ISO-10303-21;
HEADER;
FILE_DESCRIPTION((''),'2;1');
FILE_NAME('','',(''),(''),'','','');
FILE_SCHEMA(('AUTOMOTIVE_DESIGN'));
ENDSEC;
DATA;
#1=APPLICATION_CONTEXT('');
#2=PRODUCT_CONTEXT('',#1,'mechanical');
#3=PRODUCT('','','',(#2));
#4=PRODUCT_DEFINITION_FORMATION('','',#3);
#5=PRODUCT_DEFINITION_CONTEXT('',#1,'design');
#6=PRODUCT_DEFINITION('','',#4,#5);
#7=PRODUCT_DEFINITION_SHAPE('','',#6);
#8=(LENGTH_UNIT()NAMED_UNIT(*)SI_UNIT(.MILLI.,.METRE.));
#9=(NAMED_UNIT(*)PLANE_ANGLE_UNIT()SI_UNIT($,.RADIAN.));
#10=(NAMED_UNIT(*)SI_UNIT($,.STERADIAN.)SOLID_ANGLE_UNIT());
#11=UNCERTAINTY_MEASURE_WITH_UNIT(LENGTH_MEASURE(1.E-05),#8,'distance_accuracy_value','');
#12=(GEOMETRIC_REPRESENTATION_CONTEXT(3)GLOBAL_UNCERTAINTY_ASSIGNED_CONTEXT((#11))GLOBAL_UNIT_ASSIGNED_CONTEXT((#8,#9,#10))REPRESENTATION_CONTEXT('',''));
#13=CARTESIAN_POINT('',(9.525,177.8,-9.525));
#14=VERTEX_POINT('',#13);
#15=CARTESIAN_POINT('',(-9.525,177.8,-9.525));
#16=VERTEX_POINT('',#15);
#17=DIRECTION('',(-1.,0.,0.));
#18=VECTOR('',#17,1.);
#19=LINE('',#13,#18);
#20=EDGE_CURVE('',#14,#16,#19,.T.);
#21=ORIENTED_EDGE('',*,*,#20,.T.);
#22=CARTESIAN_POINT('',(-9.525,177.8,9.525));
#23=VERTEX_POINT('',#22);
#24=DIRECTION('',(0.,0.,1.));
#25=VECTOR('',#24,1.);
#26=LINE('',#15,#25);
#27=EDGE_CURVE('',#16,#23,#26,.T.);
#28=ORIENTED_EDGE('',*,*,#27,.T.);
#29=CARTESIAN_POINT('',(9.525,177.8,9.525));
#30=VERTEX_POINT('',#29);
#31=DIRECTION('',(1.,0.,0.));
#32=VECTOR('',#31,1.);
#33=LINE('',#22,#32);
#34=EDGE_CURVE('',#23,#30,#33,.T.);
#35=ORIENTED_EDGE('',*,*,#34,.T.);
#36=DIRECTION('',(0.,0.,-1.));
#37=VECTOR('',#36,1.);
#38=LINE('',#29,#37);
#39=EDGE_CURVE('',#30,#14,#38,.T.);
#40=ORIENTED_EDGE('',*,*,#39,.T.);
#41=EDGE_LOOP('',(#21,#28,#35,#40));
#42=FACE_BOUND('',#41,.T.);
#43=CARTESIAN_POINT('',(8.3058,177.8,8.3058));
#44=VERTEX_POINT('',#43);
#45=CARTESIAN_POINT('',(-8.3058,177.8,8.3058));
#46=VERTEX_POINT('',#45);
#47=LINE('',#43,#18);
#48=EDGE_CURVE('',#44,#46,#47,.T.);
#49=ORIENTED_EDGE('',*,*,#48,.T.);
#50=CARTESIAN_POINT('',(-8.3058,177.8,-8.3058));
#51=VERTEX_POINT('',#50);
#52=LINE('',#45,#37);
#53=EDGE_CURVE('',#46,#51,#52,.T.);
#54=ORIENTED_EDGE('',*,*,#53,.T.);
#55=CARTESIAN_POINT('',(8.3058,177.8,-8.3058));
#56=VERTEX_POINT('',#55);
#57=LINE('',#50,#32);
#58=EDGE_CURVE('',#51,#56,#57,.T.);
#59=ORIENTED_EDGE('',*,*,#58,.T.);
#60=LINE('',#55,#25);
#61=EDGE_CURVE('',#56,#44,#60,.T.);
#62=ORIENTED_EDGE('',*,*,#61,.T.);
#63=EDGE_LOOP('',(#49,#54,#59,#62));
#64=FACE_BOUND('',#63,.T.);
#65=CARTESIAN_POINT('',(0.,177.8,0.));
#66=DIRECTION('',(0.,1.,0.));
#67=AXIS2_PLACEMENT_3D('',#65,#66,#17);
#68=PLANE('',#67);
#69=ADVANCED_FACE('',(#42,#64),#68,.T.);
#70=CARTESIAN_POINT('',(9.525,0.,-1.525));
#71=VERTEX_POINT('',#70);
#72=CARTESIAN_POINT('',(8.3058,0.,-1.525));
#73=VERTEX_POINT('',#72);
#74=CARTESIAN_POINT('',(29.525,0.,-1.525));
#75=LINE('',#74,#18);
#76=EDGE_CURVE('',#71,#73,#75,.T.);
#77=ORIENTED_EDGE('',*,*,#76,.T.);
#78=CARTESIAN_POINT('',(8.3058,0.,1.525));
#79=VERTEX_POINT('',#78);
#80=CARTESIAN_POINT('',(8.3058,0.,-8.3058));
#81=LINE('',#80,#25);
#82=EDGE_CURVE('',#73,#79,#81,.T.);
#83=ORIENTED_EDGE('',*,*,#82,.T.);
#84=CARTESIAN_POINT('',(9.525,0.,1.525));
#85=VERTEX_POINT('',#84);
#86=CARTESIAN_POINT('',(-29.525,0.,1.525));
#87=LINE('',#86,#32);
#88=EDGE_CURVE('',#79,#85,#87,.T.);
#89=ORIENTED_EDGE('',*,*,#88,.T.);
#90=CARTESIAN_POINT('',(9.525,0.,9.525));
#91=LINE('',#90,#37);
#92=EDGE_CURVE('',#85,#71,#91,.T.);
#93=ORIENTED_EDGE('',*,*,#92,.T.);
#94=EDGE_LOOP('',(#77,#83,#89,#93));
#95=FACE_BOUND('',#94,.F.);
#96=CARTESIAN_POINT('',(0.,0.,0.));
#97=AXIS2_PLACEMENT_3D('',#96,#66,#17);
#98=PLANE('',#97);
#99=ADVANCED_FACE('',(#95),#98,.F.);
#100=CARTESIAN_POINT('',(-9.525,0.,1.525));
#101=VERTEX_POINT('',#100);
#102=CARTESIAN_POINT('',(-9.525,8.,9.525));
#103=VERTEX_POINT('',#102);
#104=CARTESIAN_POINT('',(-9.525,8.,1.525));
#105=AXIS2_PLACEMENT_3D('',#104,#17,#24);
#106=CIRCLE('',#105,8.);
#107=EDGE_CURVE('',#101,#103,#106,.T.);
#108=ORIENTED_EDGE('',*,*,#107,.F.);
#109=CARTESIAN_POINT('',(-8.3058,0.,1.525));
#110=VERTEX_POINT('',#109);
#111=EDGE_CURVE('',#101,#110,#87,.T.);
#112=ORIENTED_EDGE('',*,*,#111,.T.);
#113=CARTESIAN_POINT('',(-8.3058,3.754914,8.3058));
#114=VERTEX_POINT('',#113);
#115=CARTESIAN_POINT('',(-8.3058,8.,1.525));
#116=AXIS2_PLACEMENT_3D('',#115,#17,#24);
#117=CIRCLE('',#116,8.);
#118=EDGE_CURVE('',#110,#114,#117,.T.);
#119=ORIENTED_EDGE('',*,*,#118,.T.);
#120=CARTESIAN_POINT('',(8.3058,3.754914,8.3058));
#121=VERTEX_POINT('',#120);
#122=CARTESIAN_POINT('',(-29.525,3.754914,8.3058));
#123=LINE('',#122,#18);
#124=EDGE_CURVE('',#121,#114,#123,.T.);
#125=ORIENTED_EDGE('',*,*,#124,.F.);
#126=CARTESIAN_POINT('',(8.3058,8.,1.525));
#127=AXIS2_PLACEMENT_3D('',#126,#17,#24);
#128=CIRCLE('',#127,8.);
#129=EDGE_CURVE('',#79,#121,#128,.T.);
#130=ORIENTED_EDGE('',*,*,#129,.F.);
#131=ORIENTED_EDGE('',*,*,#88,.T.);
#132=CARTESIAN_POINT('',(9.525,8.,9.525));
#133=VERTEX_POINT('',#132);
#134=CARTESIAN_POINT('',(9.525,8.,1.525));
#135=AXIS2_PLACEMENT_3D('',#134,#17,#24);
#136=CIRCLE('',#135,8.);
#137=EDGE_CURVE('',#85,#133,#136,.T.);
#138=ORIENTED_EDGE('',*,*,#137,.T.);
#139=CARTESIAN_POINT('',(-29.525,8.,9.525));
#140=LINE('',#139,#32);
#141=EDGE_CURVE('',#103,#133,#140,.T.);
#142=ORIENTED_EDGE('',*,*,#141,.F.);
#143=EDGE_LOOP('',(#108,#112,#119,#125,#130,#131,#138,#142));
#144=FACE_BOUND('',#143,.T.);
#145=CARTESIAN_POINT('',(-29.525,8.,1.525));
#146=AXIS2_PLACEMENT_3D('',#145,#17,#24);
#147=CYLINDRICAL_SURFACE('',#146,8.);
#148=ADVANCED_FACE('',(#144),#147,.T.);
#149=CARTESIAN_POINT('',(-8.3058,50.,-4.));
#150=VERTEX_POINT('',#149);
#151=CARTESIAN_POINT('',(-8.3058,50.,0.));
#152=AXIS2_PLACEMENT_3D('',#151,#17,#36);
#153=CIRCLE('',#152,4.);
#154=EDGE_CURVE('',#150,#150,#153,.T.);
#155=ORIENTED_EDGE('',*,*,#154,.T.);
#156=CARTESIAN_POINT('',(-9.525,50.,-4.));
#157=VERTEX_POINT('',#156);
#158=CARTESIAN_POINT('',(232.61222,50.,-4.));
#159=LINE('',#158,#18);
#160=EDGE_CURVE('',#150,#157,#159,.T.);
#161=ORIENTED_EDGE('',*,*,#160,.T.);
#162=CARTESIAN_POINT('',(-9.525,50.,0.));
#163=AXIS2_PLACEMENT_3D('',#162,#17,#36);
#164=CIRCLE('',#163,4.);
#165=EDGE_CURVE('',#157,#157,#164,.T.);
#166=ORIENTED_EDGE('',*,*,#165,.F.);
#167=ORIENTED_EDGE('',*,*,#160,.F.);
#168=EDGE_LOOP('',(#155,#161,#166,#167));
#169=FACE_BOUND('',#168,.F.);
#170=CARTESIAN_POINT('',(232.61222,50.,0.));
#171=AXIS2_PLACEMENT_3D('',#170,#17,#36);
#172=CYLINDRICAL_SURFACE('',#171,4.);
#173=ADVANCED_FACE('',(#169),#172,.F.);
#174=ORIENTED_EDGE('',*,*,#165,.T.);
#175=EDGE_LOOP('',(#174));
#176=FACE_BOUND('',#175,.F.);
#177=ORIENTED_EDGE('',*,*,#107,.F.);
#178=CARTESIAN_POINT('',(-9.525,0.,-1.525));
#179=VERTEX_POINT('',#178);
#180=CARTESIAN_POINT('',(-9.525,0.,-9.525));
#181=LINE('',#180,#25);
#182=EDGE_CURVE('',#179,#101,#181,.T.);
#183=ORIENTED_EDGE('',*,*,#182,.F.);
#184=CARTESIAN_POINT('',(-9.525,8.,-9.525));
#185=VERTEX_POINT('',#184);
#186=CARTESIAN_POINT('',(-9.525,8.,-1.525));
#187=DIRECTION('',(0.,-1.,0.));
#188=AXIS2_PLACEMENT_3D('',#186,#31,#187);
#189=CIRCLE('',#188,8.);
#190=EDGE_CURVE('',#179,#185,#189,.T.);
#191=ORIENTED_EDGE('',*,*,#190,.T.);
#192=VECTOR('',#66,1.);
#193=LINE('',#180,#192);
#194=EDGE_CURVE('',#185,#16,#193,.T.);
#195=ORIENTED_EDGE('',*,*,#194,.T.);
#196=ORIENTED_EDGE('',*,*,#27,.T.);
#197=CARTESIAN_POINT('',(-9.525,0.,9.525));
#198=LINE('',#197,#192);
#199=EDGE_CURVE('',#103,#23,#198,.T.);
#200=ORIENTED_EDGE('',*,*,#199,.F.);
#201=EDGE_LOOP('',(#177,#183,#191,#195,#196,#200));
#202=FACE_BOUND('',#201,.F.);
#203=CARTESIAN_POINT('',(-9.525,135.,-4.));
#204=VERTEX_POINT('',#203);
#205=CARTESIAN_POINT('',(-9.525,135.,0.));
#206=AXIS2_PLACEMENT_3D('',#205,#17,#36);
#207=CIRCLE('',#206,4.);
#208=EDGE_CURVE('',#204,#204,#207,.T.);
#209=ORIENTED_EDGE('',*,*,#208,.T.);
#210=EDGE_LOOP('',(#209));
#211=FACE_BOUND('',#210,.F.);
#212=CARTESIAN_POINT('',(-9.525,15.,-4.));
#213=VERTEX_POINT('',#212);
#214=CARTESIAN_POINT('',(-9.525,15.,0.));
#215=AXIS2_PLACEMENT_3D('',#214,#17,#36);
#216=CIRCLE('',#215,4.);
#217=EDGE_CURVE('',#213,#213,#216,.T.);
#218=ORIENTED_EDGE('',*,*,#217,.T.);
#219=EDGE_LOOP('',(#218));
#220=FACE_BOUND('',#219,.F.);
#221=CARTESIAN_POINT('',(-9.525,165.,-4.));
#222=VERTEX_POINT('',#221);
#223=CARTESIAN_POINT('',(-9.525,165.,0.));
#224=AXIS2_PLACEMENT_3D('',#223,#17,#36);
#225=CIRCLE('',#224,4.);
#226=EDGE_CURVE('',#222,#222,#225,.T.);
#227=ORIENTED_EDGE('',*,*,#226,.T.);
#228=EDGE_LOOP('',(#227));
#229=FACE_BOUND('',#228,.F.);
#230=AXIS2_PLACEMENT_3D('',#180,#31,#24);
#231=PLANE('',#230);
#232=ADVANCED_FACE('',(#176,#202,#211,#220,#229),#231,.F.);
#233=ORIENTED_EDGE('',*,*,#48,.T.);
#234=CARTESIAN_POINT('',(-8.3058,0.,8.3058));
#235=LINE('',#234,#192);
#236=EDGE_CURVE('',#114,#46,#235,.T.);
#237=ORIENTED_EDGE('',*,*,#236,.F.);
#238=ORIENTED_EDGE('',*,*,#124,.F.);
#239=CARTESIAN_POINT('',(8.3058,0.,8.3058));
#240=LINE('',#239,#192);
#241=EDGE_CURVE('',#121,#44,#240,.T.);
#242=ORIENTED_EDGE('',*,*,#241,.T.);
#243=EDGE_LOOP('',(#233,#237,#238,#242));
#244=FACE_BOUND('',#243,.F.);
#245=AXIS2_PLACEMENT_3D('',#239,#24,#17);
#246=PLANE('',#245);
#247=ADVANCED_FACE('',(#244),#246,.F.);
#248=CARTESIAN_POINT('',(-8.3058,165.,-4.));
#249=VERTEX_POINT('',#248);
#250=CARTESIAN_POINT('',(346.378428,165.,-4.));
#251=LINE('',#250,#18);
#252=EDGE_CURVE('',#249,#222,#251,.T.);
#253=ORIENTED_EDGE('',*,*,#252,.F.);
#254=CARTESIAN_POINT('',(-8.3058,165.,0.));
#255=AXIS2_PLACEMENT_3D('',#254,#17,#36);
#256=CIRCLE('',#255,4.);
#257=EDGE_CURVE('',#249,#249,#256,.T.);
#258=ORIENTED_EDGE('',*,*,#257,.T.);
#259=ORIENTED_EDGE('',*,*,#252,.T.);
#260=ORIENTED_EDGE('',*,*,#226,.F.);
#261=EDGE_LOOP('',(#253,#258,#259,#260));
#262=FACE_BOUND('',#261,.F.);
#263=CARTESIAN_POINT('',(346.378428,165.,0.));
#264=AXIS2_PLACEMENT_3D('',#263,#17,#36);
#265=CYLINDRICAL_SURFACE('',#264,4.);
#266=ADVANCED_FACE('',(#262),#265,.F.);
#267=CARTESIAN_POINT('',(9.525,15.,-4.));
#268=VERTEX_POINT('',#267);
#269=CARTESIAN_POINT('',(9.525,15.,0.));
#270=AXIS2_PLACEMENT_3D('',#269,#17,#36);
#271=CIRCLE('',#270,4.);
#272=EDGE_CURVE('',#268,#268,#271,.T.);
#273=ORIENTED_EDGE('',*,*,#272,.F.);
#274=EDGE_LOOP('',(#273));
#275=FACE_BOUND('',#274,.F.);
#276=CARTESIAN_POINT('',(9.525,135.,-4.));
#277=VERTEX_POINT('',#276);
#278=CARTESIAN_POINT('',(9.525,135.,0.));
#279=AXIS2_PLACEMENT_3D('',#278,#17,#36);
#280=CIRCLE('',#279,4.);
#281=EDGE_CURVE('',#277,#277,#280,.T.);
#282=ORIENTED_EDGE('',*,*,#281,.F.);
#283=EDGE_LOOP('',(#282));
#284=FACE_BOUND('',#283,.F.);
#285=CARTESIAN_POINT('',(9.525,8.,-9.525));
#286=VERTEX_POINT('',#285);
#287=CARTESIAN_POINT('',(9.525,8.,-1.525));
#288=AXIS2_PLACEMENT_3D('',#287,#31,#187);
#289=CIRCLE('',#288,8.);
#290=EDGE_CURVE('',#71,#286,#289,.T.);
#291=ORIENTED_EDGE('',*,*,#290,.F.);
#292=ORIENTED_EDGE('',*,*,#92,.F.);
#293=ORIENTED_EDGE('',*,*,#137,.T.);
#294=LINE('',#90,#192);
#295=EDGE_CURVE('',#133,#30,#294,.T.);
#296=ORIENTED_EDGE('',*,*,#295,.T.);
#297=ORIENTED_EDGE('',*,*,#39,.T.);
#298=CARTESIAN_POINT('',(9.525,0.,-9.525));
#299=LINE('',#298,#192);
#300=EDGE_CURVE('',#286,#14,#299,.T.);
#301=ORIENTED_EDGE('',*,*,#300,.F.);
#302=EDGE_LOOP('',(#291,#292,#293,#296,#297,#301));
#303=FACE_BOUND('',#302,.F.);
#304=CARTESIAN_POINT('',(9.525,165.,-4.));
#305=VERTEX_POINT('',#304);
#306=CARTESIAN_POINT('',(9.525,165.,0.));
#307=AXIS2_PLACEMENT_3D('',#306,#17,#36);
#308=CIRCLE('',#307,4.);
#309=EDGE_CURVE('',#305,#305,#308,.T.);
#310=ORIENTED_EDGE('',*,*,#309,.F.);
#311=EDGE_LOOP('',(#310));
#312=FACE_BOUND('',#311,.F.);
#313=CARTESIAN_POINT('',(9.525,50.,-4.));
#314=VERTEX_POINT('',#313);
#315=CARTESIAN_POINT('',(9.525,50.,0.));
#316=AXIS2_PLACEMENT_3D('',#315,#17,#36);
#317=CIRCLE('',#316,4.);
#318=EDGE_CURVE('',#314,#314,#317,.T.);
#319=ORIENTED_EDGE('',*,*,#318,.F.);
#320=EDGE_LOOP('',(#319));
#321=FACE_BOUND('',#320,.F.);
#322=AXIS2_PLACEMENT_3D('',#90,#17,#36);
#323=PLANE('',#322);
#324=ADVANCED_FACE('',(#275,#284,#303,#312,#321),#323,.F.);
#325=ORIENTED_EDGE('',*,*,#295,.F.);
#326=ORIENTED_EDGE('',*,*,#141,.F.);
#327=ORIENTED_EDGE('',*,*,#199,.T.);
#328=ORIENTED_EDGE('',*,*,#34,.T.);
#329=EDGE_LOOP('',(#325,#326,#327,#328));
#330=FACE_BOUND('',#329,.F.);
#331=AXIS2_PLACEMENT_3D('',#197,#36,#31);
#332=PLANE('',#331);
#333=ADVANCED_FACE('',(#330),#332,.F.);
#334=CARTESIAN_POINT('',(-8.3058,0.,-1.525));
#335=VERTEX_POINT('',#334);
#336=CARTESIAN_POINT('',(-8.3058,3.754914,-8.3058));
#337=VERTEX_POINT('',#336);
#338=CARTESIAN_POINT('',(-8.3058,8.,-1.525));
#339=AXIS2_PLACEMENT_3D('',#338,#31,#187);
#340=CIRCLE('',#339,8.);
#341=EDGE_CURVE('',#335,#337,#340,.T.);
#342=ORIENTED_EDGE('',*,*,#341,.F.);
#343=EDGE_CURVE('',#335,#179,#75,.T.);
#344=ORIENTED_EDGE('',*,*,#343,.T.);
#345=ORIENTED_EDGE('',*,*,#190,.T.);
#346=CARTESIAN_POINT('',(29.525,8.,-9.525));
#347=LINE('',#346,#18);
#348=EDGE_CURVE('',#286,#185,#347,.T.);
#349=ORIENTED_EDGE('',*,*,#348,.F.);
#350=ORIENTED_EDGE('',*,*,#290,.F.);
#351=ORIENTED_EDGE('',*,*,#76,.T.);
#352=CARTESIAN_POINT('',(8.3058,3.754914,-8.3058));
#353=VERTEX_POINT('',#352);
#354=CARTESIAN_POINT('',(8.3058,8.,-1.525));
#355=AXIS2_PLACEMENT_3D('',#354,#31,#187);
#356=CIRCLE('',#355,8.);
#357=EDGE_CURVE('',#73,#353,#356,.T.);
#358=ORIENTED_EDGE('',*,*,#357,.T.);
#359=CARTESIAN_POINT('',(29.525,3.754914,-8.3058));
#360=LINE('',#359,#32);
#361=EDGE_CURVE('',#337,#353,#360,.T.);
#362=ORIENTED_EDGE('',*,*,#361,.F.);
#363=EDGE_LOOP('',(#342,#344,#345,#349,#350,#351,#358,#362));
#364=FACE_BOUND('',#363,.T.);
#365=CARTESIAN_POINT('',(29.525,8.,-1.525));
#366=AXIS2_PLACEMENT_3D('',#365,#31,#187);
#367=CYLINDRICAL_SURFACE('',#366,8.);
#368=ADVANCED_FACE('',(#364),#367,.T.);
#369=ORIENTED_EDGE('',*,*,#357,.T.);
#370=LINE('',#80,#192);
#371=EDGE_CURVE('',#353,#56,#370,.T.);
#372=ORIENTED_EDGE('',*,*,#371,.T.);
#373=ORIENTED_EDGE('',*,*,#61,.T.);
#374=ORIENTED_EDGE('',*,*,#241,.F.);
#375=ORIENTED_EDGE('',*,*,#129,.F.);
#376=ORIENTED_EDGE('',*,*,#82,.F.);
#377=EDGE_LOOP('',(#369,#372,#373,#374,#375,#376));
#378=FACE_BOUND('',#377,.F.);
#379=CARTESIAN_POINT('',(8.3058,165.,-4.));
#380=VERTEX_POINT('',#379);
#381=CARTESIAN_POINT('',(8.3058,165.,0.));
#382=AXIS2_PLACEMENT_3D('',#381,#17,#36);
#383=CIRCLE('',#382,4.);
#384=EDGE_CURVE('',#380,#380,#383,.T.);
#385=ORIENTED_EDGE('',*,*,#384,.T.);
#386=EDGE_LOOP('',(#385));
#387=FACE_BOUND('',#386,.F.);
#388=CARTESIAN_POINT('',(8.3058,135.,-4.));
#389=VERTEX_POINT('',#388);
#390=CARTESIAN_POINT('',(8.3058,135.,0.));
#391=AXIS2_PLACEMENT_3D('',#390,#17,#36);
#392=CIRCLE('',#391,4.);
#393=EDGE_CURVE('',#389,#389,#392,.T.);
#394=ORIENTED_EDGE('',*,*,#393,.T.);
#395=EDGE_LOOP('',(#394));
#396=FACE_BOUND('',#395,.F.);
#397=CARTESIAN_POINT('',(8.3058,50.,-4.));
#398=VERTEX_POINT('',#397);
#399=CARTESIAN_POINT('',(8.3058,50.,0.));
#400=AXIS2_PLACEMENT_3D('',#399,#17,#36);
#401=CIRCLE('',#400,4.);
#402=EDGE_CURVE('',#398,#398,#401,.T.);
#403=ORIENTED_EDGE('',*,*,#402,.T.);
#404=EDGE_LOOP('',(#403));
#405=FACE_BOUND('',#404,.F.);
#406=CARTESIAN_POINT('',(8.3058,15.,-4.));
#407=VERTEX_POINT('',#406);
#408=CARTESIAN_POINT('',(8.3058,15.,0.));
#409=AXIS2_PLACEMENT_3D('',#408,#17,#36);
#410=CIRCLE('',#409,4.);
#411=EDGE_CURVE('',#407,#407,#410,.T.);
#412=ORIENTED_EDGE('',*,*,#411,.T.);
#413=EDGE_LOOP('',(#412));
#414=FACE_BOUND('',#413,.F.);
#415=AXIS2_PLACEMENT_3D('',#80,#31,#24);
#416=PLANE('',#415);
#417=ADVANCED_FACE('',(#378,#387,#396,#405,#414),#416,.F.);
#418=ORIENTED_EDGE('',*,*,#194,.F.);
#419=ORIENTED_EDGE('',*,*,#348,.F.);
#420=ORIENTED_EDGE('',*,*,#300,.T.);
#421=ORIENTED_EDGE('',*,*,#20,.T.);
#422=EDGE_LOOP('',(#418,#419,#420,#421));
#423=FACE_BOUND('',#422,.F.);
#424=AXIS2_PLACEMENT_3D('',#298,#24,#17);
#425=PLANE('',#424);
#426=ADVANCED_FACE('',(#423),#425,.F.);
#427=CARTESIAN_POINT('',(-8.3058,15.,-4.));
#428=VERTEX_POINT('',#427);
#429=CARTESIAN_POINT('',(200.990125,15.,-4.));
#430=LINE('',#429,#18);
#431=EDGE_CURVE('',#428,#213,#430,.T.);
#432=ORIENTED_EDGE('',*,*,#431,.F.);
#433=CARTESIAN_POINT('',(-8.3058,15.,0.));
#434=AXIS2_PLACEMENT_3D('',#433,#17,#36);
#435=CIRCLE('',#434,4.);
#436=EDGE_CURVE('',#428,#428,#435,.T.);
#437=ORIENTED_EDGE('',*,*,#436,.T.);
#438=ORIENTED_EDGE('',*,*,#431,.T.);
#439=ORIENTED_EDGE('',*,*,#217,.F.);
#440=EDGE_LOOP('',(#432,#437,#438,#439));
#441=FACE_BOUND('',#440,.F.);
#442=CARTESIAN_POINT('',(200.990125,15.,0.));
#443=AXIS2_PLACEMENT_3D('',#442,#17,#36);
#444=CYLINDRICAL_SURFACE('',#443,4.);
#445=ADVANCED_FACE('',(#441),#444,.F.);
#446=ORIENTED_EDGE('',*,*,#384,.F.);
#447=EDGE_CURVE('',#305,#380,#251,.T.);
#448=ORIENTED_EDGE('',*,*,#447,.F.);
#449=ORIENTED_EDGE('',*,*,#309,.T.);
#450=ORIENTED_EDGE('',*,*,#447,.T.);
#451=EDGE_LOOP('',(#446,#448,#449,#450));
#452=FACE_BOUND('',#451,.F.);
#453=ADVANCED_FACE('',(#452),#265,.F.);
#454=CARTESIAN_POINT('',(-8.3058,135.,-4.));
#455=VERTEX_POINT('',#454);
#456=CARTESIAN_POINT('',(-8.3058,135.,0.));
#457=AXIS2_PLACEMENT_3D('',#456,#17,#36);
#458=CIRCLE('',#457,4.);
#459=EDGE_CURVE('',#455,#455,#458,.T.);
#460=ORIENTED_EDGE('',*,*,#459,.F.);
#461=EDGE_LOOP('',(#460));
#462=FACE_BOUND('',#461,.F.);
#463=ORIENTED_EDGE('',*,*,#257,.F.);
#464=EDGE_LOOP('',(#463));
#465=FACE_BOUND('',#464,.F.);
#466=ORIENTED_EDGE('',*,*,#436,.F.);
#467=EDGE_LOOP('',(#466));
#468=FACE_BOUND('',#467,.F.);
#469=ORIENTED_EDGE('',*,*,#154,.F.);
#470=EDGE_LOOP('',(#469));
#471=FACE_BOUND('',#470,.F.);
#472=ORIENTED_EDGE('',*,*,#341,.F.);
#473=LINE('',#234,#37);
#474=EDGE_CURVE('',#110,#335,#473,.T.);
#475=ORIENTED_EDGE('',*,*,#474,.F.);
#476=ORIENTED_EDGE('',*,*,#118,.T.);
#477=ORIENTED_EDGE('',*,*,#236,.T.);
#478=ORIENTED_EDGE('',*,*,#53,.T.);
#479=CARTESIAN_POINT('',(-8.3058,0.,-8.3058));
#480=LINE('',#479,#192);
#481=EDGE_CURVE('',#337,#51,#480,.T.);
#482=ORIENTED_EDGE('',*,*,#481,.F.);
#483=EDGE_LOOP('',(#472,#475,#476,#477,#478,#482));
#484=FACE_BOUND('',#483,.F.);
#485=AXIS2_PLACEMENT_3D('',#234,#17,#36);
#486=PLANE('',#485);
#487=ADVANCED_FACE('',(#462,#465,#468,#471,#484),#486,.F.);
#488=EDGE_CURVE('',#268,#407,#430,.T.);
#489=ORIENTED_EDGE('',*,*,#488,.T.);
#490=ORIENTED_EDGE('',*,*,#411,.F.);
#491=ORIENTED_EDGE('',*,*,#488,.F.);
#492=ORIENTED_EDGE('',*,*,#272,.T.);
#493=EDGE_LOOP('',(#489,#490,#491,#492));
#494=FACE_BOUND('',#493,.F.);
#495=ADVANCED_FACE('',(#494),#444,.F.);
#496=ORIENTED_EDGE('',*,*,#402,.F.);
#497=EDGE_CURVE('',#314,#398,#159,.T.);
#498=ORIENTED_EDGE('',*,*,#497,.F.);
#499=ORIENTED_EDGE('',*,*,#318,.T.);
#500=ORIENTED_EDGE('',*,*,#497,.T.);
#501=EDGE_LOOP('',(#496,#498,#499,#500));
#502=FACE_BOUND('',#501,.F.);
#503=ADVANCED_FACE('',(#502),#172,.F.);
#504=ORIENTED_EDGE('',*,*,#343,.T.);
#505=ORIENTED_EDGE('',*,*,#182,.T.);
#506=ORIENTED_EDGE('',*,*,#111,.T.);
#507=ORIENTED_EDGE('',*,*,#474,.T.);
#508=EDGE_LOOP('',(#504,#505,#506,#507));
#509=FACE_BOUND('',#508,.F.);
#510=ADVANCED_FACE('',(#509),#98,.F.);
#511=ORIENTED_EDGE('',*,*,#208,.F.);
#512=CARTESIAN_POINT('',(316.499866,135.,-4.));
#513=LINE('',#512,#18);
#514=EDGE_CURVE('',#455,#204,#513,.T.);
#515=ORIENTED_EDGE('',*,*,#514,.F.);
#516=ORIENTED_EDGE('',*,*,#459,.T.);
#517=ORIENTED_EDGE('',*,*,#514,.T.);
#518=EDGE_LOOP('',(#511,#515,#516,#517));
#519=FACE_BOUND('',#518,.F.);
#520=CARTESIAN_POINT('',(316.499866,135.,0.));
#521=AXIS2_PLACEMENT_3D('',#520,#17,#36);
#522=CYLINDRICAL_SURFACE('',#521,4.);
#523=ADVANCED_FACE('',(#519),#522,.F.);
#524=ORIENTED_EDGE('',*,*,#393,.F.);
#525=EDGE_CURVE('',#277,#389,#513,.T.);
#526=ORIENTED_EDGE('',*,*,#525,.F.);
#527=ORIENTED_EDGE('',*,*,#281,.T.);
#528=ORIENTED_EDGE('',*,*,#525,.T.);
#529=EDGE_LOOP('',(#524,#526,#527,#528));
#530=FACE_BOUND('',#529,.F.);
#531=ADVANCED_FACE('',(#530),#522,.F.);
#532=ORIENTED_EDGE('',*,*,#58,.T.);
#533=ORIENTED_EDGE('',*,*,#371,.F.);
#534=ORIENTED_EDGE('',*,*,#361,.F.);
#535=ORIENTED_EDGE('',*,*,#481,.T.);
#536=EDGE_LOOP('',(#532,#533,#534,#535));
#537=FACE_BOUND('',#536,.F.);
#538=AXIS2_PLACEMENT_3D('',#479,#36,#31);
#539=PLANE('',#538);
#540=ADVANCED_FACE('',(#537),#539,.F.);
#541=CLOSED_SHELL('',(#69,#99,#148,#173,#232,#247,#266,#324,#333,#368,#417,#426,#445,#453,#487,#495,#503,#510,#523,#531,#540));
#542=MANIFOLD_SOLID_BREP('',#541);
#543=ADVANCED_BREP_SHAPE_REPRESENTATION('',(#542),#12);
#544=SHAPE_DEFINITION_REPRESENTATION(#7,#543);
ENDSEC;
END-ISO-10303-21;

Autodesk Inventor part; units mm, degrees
ref_plane "YZ Plane" through (0, 0, 0) normal (1, 0, 0) x (0, 1, 0)
ref_plane "XZ Plane" through (0, 0, 0) normal (0, 1, 0) x (-1, 0, 0)
ref_plane "XY Plane" through (0, 0, 0) normal (0, 0, 1) x (1, 0, 0)
sketch "Sketch4" plane through (0, 0, 0) normal (0, 1, 0) x (-1, 0, 0)
  line L0 (-9.525, -9.525) -> (9.525, -9.525)
  line L1 (9.525, -9.525) -> (9.525, 9.525)
  line L2 (9.525, 9.525) -> (-9.525, 9.525)
  line L3 (-9.525, 9.525) -> (-9.525, -9.525)
  line L4 (0, -13.335) -> (0, 13.335) construction
  line L5 (13.335, 0) -> (-13.335, 0) construction
  line L6 (-8.3058, 8.3058) -> (8.3058, 8.3058)
  line L7 (8.3058, 8.3058) -> (8.3058, -8.3058)
  line L8 (8.3058, -8.3058) -> (-8.3058, -8.3058)
  line L9 (-8.3058, -8.3058) -> (-8.3058, 8.3058)
  point P0 (0, 0)
  dimension "d44" = 19.05
  dimension "d45" = 1.2192
extrude "Extrusion2" add sketch "Sketch4" along normal blind 177.8
sketch "Sketch5" plane through (0, 0, 0) normal (1, 0, 0) x (0, 1, 0)
  line L0 (0, 115.5) -> (0, -115.5) construction
  line L1 (-33, 0) -> (198, 0) construction
  line L2 (165, 0) -> (135, 0)
  point P0 (0, 0)
  point P1 (50, 0)
  point P2 (15, 0)
  point P3 (150, 0)
  dimension "d48" = 15
  dimension "d49" = 50
  dimension "d50" = 30
  dimension "d51" = 135
  dimension "d59" = 150
hole "Hole2" at (0, 50, 0) at (0, 15, 0) at (0, 165, 0) at (0, 135, 0) direction (-1, 0, 0) diameter 8 end through all both
fillet "Fillet2" radius 8 2 edges at (0, 0, -9.525) (0, 0, 9.525)
properties part number "Pedalbox_V2_Brake_Extrusion"
